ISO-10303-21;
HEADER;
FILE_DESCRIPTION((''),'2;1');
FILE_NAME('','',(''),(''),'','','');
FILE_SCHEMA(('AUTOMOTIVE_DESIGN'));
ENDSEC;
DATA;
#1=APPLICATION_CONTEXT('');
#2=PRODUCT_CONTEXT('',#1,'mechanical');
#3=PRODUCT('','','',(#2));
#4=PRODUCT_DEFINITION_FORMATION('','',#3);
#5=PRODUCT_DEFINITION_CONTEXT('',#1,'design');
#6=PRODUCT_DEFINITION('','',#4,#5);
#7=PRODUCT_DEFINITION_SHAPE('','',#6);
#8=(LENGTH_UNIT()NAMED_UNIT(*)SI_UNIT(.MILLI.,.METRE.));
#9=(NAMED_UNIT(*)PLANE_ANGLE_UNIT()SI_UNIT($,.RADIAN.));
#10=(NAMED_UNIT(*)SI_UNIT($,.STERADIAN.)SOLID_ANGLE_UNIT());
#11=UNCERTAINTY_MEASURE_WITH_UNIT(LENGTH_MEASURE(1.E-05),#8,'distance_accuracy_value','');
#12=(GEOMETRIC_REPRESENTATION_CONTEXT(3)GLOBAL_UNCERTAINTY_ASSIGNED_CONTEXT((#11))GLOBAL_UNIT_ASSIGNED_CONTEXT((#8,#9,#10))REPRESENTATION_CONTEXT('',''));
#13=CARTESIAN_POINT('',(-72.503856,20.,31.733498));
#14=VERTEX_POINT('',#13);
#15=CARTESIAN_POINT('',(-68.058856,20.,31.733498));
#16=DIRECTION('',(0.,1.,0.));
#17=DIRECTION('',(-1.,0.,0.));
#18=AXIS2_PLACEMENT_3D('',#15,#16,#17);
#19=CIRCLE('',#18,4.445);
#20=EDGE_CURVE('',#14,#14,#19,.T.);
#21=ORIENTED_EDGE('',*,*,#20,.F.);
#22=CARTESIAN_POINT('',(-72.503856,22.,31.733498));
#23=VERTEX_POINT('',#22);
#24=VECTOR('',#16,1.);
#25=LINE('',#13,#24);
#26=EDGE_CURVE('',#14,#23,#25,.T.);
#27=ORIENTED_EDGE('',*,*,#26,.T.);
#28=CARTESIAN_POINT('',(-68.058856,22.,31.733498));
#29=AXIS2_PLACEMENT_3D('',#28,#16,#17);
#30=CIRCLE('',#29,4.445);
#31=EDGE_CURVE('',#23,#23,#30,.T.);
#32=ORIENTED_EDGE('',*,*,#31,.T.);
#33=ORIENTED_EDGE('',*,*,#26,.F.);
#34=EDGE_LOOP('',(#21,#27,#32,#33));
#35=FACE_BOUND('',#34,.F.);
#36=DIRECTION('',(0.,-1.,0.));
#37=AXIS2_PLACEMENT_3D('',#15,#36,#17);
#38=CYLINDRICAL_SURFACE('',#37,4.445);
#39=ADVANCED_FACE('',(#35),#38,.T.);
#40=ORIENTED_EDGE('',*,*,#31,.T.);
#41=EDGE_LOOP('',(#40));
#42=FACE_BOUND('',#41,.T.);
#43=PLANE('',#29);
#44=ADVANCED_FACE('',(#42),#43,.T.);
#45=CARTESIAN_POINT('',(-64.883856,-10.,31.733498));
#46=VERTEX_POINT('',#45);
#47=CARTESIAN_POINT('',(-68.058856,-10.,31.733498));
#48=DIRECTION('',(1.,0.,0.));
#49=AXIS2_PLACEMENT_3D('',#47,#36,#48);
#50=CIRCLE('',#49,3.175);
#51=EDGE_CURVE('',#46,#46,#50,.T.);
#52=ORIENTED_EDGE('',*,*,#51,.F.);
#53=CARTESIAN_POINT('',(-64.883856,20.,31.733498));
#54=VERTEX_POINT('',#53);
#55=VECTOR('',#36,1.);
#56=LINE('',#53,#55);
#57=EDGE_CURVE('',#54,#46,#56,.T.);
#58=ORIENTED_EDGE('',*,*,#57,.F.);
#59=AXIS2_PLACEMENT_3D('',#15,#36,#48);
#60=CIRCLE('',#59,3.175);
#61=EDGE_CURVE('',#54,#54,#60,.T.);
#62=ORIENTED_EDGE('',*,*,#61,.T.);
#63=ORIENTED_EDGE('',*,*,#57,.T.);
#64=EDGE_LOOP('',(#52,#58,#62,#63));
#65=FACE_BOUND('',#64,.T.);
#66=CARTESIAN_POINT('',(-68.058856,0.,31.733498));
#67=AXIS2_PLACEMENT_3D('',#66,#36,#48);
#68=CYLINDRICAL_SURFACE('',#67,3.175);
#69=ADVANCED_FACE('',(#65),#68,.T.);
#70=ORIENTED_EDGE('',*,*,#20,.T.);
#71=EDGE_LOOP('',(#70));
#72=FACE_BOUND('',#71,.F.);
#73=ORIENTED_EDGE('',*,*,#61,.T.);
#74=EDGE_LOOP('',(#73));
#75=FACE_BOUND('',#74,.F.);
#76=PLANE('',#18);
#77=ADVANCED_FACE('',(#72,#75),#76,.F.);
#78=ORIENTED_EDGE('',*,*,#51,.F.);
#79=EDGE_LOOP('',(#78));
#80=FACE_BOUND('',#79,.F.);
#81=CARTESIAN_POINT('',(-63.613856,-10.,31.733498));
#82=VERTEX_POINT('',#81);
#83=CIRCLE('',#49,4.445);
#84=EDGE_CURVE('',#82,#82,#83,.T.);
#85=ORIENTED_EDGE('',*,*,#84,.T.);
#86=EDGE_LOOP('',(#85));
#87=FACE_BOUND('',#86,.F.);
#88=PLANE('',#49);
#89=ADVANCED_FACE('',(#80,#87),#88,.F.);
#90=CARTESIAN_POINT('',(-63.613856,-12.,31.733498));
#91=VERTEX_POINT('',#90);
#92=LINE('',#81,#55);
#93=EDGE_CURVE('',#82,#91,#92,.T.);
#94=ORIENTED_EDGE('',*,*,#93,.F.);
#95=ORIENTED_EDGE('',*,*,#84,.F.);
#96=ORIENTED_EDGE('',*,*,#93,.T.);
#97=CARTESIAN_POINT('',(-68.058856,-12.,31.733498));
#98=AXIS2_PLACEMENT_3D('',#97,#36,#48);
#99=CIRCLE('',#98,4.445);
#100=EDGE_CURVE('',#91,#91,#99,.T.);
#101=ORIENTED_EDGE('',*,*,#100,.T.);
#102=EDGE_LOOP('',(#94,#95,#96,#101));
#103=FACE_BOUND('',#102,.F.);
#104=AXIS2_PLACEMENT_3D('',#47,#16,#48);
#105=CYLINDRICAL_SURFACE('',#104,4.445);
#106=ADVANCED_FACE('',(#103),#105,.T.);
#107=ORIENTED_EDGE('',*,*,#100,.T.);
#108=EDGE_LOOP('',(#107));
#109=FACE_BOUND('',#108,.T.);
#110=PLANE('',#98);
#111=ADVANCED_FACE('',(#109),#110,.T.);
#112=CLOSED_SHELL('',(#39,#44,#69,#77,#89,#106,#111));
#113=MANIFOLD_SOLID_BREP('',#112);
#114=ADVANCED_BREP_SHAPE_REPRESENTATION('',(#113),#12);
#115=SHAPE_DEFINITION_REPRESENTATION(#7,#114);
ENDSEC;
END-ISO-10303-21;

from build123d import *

# Parameters (mm, degrees)
F0_R      = 3.175
F1_DEPTH  = 10
F1_FACE_R = 3.175
F2_R      = 4.445
F3_DEPTH  = 2
F4_DEPTH  = 20
F5_R      = 4.445
F6_DEPTH  = 2


with BuildPart() as f1:
    # F0 (on Front) → F1 (new body)
    with BuildSketch(Plane.XZ):
        with Locations((-68.0588558316, 31.7334979773)):
            Circle(F0_R)
    extrude(amount=F1_DEPTH)

    # F1_face (on face) + F2 (on face) → F3 (join)
    with BuildSketch(Plane(origin=(-68.0588558316, -10, 31.7334979773), x_dir=(1, 0, 0), z_dir=(0, -1, 0))):
        Circle(F1_FACE_R)
    with BuildSketch(Plane.XZ.offset(10)):
        with Locations((-68.0588558316, 31.7334979773)):
            Circle(F2_R)
    extrude(amount=F3_DEPTH)

    # F4 (add): a face of the model
    f4_faces = [f1.faces().sort_by_distance(p)[0] for p in [
        (-68.0588558316, 0, 31.7334979773),
    ]]
    extrude(f4_faces, amount=F4_DEPTH)

    # F5 (on face) → F6 (join)
    with BuildSketch(Plane(origin=(0, 20, 0), x_dir=(-1, 0, 0), z_dir=(0, 1, 0))):
        with Locations((68.0588558316, 31.7334979773)):
            Circle(F5_R)
    extrude(amount=F6_DEPTH)


solid = f1.part
